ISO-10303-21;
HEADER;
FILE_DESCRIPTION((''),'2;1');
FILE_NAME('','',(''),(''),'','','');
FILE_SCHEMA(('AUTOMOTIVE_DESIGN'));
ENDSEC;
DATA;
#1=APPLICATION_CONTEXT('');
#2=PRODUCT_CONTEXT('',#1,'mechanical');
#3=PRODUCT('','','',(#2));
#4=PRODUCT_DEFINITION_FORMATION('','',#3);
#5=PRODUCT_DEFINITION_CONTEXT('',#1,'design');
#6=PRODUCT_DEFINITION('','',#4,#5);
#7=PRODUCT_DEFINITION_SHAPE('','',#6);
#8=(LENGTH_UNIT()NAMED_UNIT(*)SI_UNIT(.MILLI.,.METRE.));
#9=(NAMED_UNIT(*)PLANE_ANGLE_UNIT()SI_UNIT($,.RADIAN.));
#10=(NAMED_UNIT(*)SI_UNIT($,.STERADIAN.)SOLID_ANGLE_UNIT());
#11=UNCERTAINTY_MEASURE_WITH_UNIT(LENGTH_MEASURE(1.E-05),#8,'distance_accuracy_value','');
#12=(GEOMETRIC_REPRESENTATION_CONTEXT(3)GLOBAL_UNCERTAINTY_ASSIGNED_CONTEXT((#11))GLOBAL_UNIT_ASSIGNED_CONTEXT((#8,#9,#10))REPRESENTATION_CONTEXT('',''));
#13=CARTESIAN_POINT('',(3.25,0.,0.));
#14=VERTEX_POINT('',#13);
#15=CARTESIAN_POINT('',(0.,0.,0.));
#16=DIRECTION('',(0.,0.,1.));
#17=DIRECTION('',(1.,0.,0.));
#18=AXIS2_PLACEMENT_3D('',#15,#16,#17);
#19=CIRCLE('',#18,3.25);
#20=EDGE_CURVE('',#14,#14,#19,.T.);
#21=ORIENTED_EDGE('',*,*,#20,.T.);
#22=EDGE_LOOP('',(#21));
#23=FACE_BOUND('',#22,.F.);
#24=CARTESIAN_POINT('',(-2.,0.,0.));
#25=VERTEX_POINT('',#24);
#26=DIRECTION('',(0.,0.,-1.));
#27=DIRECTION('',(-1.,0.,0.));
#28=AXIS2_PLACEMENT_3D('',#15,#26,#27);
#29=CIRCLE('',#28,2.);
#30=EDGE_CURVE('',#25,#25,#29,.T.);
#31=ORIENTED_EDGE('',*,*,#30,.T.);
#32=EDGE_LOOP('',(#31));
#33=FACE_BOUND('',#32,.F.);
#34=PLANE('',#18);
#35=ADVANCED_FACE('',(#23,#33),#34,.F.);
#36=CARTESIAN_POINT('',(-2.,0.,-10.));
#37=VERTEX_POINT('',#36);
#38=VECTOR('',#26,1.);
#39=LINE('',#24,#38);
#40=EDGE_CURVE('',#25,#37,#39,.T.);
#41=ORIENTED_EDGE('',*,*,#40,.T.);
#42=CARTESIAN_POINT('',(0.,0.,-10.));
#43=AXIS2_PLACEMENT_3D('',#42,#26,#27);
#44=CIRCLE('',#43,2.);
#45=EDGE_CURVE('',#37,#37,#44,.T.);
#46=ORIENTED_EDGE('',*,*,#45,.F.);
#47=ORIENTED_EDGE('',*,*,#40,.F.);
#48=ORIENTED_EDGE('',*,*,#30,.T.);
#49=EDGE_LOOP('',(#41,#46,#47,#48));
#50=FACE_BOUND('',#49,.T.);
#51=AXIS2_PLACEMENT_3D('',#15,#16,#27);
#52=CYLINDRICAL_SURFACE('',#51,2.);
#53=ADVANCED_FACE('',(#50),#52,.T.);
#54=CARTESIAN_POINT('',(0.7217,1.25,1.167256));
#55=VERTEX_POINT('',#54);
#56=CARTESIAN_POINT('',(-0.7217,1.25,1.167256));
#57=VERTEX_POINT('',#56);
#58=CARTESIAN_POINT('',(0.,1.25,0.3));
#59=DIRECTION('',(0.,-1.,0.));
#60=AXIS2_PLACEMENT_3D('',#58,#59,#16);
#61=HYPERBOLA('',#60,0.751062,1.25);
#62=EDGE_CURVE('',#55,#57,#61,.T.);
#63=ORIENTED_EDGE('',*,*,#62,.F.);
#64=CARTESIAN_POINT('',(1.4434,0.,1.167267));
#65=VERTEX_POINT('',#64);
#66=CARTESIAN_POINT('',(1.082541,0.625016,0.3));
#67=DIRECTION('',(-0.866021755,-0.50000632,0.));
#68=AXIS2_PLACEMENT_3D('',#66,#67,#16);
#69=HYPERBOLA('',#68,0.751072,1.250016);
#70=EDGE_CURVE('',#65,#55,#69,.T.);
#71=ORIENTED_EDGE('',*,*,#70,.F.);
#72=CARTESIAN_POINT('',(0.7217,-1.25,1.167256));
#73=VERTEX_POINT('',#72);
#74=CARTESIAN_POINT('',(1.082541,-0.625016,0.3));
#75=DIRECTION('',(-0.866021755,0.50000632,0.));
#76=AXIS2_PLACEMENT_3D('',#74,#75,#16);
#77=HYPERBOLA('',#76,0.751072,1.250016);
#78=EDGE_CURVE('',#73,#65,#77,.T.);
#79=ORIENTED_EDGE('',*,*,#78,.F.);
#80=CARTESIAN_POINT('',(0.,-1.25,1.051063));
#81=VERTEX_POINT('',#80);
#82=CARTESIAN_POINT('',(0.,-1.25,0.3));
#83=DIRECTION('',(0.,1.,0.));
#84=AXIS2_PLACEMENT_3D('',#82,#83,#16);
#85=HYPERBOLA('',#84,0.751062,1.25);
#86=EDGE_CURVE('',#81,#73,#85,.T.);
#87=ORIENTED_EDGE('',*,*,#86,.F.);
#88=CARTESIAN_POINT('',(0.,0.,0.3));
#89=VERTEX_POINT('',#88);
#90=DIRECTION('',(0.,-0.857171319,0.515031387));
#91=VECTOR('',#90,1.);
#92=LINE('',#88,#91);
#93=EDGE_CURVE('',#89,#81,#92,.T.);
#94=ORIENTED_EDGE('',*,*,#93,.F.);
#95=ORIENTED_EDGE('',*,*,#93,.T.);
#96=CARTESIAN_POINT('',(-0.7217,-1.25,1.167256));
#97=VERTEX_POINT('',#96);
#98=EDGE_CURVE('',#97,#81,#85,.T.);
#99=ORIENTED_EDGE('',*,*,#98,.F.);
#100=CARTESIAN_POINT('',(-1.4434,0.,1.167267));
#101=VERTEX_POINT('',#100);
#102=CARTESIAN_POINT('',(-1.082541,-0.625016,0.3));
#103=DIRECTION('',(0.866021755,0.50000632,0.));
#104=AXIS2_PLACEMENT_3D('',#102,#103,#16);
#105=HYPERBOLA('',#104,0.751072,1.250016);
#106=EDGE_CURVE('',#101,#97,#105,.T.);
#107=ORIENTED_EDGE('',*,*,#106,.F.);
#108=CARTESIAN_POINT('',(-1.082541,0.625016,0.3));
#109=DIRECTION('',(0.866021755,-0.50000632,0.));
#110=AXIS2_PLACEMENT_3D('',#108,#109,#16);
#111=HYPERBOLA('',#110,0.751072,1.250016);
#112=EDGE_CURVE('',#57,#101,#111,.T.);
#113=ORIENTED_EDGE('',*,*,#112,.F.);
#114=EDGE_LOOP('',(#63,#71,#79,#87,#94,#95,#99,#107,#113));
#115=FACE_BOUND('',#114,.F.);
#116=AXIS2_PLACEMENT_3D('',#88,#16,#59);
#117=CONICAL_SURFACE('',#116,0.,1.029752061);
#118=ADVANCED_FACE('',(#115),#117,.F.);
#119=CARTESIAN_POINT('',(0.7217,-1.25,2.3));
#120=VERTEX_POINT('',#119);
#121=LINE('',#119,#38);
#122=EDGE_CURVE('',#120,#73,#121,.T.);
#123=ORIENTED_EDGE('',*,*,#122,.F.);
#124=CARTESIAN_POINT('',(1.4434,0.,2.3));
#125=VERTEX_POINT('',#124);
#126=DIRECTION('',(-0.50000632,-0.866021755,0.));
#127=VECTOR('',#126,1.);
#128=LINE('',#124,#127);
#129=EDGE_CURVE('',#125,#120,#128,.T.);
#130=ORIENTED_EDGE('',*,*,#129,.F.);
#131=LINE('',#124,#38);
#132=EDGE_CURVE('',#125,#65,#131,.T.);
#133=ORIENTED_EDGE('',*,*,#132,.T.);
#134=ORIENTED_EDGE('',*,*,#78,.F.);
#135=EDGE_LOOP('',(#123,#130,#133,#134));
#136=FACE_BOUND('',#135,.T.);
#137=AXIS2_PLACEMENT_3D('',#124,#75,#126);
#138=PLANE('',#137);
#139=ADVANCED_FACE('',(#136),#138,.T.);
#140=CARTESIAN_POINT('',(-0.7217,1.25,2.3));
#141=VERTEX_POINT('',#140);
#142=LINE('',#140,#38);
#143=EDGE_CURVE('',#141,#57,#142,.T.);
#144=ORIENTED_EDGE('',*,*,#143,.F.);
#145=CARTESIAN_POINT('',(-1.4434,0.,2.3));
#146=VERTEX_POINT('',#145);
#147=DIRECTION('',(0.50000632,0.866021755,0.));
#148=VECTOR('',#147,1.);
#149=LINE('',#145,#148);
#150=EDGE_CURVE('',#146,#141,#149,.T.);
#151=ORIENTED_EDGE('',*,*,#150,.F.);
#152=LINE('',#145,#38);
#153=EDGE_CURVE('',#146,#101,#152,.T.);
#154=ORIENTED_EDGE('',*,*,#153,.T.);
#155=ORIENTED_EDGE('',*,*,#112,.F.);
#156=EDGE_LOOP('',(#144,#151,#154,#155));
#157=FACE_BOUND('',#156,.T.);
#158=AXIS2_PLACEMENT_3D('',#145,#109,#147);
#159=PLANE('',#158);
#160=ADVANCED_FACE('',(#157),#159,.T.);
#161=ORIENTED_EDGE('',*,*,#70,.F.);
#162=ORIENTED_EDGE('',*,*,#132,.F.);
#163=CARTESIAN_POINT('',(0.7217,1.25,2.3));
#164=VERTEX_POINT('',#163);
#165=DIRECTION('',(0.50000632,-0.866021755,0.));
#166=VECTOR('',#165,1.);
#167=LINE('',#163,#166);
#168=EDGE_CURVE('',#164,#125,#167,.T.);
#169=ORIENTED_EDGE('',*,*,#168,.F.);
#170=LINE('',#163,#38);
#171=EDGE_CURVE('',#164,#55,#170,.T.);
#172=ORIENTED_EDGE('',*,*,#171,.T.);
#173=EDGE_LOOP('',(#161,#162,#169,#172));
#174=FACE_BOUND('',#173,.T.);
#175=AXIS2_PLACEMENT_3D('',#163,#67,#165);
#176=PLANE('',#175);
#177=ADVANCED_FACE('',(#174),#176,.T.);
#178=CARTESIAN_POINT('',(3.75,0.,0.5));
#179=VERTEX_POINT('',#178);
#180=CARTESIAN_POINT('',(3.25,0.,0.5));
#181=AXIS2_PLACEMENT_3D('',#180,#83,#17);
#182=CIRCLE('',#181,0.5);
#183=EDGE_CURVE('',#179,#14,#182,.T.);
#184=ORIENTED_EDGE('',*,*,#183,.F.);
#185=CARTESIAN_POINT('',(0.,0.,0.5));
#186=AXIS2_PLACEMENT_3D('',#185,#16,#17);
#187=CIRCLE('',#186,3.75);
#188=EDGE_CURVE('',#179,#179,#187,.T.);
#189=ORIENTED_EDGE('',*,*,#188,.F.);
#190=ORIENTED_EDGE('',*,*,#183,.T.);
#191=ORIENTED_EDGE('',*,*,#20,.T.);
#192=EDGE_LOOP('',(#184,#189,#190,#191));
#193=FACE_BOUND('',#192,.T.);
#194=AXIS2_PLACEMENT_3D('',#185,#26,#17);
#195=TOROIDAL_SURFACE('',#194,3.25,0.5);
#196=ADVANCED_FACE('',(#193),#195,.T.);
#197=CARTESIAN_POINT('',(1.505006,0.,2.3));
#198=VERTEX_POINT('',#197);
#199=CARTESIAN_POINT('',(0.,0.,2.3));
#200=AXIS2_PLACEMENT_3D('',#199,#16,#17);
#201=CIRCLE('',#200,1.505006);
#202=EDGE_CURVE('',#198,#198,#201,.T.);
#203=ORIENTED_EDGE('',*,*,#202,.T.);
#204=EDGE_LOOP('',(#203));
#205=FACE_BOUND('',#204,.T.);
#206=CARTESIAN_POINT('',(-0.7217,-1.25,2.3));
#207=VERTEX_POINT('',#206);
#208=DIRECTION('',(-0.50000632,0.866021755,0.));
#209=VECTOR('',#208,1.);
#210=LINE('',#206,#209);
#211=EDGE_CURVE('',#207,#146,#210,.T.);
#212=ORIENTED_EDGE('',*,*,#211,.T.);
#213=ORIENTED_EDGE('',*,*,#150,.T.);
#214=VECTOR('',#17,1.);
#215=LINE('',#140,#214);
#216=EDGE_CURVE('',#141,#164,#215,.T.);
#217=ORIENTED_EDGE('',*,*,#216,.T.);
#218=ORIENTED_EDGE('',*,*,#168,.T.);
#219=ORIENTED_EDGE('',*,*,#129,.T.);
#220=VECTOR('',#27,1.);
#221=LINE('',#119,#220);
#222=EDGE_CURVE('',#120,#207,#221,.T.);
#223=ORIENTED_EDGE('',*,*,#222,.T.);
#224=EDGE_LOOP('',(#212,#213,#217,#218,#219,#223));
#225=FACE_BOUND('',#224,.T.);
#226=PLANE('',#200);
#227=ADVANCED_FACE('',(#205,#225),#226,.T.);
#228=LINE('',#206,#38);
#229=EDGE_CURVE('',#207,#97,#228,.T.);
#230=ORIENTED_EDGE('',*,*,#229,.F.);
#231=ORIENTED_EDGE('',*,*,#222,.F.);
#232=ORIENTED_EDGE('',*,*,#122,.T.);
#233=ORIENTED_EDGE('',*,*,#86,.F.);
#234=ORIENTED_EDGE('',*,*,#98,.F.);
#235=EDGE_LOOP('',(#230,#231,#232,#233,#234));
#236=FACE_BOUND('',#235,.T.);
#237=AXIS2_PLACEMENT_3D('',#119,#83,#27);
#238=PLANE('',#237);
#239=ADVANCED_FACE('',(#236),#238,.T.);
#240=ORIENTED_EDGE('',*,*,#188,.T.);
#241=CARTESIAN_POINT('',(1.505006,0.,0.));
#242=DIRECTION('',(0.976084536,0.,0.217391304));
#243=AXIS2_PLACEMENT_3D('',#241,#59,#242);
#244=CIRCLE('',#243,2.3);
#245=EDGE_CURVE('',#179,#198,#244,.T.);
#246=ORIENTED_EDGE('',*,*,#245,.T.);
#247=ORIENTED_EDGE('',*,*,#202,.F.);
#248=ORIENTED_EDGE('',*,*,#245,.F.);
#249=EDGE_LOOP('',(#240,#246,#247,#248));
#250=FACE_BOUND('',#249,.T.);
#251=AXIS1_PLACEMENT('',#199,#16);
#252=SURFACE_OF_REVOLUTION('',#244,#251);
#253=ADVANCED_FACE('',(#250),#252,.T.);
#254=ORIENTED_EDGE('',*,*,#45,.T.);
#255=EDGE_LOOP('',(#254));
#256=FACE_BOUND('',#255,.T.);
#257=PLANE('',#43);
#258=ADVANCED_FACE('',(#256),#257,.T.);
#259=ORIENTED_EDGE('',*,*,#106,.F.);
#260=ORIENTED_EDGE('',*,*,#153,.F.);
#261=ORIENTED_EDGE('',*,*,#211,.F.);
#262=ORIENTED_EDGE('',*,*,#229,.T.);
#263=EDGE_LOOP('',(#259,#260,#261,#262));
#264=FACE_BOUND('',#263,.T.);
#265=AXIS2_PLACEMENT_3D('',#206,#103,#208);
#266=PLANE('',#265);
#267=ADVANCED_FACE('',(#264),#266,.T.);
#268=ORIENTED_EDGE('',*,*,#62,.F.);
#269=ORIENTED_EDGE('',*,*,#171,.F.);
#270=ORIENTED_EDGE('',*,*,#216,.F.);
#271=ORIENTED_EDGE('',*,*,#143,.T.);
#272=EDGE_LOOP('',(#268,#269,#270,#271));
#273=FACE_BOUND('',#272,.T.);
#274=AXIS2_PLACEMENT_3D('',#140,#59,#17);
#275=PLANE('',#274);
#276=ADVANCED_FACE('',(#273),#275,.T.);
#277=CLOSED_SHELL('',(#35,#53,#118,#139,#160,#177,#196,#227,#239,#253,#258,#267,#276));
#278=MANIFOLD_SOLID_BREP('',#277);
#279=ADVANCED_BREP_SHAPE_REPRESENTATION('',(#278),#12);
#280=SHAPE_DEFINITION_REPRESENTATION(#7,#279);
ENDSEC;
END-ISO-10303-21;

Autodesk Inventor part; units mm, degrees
ref_plane "YZ Plane" through (0, 0, 0) normal (1, 0, 0) x (0, 1, 0)
ref_plane "XZ Plane" through (0, 0, 0) normal (0, 1, 0) x (-1, 0, 0)
ref_plane "XY Plane" through (0, 0, 0) normal (0, 0, 1) x (1, 0, 0)
sketch "Sketch1" plane through (0, 0, 0) normal (0, 0, 1) x (1, 0, 0)
  circle A0 centre (0, 0) radius 3.75
  dimension "d0" = 7.5
extrude "Extrusion1" add sketch "Sketch1" along normal blind 2.3
fillet "Fillet3" radius 0.5 1 edges at (-3.75, 0, 0)
fillet "Fillet4" radius 2.3 1 edges at (-3.75, 0, 2.3)
sketch "草圖6" plane through (0, 0, 2.3) normal (0, 0, 1) x (1, 0, 0)
  circle A0 centre (0, 0) radius 1.505 projected
  line L0 (0.7217, 1.25) -> (1.4434, 0)
  line L1 (1.4434, 0) -> (0.7217, -1.25)
  line L2 (0.7217, -1.25) -> (-0.7217, -1.25)
  line L3 (-0.7217, -1.25) -> (-1.4434, 0)
  line L4 (-1.4434, 0) -> (-0.7217, 1.25)
  line L5 (-0.7217, 1.25) -> (0.7217, 1.25)
  dimension "d27" = 2.5
extrude "擠出4" cut sketch "草圖6" against normal blind 2 contours L0 L1 L2 L3 L4 L5
sketch "草圖7" plane through (0, 0, 0) normal (1, 0, 0) x (0, 1, 0)
  line L0 (0, 0.3) -> (-2, 1.5017)
  line L1 (-2, 1.5017) -> (-2, 0.3)
  line L2 (0, 0.3) -> (-2, 0.3)
  line L3 (0, 0) -> (0, 2.4201)
  dimension "d30" = 0.3
  dimension "d31" = 31
  dimension "d34" = 2
revolve "迴轉3" add sketch "草圖7" angle 360 about axis through (0, 0, 0) along (0, 0, 1)
sketch "草圖8" plane through (0, 0, 0) normal (0, 0, -1) x (-1, 0, 0)
  circle A0 centre (0, 0) radius 3.25 projected
  circle A1 centre (0, 0) radius 2
  dimension "d35" = 4
extrude "擠出5" add sketch "草圖8" along normal blind 10 contours A1
thread "螺紋2" size "M4x0.7" class "6g" standard "ANSI Metric M Profile" full length
properties part number "screw_M3_10_hex"
